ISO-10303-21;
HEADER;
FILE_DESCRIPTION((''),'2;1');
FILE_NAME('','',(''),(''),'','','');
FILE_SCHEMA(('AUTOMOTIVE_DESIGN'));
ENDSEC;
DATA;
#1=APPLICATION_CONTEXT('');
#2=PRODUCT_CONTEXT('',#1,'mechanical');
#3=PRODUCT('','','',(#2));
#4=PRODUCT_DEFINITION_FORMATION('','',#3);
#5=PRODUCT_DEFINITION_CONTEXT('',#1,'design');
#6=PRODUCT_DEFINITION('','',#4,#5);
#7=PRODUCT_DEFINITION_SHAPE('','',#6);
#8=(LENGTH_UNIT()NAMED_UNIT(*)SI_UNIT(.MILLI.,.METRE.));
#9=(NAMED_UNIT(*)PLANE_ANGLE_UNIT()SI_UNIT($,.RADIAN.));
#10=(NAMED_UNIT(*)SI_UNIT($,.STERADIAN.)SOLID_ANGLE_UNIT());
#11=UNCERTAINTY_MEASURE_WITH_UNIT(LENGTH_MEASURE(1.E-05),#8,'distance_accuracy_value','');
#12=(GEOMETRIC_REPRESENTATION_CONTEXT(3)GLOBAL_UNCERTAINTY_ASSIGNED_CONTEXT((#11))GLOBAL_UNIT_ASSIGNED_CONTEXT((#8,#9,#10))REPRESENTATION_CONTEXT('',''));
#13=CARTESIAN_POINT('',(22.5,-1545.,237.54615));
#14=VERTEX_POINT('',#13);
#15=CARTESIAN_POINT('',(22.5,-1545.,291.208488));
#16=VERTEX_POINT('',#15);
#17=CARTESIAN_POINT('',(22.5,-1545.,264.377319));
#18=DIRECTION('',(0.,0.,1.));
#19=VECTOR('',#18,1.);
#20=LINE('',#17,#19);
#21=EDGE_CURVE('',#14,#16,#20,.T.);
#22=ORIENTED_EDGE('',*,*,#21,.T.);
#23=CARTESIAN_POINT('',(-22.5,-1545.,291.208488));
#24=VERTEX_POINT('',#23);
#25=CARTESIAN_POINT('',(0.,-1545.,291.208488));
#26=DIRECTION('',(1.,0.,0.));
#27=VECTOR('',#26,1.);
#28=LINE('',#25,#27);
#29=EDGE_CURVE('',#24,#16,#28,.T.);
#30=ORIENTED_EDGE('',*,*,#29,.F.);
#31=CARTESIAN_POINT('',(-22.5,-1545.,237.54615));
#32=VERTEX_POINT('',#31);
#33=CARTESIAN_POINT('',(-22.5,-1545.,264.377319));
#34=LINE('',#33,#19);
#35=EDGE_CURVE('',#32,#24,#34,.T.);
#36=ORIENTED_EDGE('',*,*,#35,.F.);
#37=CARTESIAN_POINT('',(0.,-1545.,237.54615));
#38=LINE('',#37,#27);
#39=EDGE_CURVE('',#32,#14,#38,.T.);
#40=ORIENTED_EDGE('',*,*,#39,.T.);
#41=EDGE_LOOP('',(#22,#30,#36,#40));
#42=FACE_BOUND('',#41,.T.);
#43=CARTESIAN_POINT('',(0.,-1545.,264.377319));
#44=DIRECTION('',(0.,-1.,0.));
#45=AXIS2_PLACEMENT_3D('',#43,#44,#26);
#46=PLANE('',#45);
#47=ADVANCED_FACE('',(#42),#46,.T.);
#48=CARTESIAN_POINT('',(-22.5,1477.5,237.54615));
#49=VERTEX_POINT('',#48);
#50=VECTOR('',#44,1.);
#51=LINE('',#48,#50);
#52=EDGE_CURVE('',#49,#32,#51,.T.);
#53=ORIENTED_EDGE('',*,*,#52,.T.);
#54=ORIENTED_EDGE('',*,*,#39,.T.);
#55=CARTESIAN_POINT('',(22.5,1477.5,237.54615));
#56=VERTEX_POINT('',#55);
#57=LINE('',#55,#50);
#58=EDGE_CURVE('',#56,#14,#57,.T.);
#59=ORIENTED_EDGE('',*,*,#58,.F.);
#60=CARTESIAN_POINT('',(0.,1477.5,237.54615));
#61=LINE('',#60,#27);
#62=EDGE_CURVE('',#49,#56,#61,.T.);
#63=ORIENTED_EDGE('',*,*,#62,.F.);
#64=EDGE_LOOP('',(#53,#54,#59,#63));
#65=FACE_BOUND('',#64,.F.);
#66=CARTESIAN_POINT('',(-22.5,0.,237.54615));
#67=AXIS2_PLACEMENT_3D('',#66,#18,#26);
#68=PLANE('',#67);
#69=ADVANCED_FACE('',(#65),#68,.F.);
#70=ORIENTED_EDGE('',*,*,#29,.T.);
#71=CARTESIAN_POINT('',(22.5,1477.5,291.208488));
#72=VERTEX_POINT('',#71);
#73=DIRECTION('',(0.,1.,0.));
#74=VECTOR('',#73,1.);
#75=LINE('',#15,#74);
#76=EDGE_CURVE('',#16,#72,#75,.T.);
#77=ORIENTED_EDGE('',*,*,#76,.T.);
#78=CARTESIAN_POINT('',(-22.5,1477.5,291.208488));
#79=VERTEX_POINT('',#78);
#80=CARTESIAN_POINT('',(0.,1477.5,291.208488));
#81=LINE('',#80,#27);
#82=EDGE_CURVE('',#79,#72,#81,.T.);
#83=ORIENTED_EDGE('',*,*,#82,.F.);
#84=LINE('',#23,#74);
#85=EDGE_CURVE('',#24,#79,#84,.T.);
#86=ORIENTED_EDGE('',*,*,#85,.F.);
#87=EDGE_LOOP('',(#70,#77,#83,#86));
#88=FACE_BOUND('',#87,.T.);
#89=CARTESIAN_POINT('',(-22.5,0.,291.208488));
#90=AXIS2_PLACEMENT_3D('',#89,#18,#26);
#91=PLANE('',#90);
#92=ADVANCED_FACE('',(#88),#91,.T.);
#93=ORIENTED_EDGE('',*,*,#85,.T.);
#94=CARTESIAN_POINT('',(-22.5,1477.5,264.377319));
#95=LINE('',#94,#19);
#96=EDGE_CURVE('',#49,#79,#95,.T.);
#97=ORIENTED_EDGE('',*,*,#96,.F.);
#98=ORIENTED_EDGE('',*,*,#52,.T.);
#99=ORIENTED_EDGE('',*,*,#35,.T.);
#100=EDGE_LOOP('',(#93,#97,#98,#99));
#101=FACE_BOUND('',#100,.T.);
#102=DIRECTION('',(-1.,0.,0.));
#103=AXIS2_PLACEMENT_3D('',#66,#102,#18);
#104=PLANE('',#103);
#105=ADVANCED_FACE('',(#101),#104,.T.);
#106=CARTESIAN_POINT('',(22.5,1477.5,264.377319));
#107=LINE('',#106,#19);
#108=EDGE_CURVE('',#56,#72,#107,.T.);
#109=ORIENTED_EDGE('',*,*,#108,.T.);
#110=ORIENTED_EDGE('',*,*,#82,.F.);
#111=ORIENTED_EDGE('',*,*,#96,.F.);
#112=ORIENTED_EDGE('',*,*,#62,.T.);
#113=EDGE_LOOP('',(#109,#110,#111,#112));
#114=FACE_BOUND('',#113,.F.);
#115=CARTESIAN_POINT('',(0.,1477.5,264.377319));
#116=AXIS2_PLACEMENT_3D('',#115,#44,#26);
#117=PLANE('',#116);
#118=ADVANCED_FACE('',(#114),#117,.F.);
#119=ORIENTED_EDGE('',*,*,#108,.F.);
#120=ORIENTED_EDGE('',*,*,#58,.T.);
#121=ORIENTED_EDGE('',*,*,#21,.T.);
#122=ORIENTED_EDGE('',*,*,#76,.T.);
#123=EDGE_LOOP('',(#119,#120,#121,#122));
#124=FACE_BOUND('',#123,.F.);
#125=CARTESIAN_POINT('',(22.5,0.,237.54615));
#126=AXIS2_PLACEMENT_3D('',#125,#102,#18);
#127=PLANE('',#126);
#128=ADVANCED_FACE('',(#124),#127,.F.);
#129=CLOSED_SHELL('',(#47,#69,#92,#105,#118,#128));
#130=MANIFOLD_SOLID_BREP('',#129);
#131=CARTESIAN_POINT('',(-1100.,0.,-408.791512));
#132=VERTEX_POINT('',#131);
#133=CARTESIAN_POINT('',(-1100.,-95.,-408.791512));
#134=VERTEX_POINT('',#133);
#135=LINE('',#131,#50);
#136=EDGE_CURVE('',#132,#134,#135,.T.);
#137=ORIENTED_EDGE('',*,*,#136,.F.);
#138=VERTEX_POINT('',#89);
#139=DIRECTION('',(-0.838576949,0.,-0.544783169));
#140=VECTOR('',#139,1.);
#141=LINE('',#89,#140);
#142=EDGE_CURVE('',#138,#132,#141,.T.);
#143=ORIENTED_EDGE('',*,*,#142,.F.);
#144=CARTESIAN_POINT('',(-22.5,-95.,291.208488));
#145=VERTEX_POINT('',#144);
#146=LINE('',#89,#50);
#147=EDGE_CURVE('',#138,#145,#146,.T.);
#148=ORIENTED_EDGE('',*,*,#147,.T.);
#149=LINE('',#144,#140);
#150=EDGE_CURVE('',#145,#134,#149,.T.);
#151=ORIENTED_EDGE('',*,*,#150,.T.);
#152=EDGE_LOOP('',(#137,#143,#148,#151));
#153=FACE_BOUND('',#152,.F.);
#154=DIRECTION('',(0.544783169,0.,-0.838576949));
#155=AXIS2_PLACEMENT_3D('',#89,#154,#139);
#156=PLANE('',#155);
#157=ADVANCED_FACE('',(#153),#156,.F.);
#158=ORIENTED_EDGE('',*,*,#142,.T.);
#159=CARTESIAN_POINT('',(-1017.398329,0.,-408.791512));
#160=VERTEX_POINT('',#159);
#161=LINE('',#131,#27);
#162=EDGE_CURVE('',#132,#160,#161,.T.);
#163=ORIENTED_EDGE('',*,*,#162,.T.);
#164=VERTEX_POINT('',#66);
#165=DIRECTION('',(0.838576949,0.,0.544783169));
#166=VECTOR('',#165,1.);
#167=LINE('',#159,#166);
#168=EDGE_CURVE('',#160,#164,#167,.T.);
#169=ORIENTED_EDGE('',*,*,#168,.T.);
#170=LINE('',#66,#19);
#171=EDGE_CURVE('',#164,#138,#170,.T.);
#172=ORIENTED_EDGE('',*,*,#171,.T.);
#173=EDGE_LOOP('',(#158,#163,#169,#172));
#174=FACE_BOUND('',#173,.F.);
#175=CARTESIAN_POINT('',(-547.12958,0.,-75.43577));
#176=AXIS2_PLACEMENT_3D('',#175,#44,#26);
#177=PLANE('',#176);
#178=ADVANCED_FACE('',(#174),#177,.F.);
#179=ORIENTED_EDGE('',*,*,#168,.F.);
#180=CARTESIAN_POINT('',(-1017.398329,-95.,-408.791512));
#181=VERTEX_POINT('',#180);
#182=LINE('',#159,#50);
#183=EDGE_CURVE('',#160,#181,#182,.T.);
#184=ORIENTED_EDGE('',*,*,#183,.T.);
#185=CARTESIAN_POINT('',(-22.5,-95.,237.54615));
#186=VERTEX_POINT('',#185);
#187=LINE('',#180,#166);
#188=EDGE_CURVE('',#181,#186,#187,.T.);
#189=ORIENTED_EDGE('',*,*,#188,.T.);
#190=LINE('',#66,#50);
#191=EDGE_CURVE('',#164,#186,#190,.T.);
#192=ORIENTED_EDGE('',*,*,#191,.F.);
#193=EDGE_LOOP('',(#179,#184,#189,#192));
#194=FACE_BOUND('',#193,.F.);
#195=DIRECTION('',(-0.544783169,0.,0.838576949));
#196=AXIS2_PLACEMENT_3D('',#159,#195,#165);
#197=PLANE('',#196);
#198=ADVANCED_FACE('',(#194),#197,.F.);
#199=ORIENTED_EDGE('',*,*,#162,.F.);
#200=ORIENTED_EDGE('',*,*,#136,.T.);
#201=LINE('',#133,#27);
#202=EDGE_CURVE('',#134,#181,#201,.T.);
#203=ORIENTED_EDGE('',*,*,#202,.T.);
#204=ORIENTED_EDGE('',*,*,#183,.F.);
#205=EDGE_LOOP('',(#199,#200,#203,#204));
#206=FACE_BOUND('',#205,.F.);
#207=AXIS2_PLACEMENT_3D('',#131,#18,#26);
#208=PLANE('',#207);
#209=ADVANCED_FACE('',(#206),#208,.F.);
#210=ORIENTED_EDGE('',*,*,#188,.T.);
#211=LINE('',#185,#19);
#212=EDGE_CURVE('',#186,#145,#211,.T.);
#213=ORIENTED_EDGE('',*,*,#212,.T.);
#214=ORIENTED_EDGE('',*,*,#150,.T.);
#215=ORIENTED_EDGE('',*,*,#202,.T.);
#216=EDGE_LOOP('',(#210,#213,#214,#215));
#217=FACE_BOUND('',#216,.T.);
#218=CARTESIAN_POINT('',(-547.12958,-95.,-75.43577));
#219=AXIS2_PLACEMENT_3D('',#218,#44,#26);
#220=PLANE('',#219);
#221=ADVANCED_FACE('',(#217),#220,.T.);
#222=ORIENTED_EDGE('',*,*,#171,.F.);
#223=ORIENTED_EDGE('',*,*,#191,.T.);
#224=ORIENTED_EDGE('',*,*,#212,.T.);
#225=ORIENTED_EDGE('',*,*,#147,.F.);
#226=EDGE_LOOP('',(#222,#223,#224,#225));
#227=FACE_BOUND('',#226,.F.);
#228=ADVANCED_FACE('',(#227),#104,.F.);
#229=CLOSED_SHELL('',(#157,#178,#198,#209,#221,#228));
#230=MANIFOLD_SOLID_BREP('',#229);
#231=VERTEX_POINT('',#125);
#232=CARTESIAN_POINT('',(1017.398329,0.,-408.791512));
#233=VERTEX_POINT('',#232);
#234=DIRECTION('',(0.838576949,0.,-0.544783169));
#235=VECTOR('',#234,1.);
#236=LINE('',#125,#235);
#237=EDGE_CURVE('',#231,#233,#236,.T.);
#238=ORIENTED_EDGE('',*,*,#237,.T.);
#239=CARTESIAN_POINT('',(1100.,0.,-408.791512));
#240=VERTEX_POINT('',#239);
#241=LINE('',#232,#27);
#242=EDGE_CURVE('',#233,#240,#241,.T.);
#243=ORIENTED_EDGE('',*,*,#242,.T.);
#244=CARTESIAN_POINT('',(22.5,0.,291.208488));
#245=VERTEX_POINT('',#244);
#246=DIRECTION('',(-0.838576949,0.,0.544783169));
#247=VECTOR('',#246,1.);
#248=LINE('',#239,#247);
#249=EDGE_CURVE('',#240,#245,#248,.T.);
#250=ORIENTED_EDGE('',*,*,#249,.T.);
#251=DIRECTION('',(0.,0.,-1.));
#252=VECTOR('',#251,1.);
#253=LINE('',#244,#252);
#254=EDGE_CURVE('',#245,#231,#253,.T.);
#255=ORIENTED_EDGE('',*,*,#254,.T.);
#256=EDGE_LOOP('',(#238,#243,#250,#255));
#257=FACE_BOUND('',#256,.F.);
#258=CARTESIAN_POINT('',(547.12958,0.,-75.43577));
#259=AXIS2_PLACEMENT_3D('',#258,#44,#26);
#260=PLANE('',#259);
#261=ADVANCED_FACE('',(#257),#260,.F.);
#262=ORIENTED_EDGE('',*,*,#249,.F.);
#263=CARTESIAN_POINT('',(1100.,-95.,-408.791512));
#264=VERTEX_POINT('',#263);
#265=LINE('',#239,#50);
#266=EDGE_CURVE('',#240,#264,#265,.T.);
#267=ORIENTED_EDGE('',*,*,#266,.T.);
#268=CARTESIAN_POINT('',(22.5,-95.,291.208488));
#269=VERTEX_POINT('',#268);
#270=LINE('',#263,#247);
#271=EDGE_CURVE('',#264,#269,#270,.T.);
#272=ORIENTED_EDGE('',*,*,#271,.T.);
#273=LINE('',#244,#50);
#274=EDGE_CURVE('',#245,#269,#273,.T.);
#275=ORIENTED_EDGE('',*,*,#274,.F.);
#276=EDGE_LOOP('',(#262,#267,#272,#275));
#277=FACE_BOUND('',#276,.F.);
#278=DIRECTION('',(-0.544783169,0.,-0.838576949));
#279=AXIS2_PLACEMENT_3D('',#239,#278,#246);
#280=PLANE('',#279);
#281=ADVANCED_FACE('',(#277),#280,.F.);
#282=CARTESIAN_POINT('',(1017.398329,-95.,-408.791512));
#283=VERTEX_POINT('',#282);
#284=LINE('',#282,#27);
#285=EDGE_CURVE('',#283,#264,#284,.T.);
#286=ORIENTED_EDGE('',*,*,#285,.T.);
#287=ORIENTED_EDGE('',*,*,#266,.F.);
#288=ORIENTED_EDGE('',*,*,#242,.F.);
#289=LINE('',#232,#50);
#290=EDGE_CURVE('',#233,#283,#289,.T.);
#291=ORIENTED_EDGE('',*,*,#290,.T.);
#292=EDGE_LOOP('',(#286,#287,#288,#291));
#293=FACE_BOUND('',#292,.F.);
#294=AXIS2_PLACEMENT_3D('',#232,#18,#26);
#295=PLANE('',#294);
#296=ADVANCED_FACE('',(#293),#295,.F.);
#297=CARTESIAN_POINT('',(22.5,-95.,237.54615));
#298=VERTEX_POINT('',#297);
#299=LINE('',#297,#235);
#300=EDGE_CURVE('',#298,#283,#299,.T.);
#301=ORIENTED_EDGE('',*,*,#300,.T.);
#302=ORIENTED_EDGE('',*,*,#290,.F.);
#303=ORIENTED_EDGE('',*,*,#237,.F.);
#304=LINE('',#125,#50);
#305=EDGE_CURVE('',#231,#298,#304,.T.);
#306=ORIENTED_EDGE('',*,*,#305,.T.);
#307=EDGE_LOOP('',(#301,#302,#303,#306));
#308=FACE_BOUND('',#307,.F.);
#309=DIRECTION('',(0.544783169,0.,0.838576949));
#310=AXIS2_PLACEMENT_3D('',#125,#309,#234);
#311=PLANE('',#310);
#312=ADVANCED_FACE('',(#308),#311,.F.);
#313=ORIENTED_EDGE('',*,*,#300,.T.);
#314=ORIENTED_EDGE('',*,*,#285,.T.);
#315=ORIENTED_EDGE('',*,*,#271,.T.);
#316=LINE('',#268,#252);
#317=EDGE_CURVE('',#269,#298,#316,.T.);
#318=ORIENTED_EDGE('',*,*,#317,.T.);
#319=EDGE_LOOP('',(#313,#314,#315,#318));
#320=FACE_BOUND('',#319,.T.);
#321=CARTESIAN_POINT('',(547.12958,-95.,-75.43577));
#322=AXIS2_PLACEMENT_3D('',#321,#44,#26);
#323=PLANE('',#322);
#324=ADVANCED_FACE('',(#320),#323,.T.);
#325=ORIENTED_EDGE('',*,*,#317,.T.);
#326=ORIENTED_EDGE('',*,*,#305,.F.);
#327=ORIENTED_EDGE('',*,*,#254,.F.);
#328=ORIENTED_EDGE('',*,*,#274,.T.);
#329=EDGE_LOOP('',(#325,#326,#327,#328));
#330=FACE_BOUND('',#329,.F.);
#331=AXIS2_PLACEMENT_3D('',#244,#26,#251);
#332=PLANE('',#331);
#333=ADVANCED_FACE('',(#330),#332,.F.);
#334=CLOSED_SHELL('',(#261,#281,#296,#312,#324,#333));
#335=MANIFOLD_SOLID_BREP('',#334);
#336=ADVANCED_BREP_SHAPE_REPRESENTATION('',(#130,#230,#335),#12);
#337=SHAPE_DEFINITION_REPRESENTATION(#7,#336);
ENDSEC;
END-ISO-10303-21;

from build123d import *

# Parameters (mm, degrees)
F1_DEPTH = 95
F0_W     = 45
F0_H     = 53.6623383946
F2_DEPTH = 1477.5
F3_DEPTH = 1545


with BuildPart() as f1:
    # F0 (on Front) → F1 (new body)
    with BuildSketch(Plane.XZ):
        Polygon((-22.5, 237.5461500682), (-22.5, 291.2084884628), (-1100, -408.7915115372), (-1017.398329114, -408.7915115372), align=None)
    extrude(amount=F1_DEPTH)


with BuildPart() as f1b:
    # F0 (on Front) → F1, piece 2 (new body)
    with BuildSketch(Plane.XZ):
        Polygon((1100, -408.7915115372), (22.5, 291.2084884628), (22.5, 237.5461500682), (1017.398329114, -408.7915115372), align=None)
    extrude(amount=F1_DEPTH)


with BuildPart() as f2:
    # F0 (on Front) → F2 (new body)
    with BuildSketch(Plane.XZ):
        with Locations((0, 264.3773192655)):
            Rectangle(F0_W, F0_H)
    extrude(amount=-F2_DEPTH)

    # F0 (on Front) → F3 (join)
    with BuildSketch(Plane.XZ):
        with Locations((0, 264.3773192655)):
            Rectangle(F0_W, F0_H)
    extrude(amount=F3_DEPTH)


solid = Compound([f1.part, f1b.part, f2.part])
